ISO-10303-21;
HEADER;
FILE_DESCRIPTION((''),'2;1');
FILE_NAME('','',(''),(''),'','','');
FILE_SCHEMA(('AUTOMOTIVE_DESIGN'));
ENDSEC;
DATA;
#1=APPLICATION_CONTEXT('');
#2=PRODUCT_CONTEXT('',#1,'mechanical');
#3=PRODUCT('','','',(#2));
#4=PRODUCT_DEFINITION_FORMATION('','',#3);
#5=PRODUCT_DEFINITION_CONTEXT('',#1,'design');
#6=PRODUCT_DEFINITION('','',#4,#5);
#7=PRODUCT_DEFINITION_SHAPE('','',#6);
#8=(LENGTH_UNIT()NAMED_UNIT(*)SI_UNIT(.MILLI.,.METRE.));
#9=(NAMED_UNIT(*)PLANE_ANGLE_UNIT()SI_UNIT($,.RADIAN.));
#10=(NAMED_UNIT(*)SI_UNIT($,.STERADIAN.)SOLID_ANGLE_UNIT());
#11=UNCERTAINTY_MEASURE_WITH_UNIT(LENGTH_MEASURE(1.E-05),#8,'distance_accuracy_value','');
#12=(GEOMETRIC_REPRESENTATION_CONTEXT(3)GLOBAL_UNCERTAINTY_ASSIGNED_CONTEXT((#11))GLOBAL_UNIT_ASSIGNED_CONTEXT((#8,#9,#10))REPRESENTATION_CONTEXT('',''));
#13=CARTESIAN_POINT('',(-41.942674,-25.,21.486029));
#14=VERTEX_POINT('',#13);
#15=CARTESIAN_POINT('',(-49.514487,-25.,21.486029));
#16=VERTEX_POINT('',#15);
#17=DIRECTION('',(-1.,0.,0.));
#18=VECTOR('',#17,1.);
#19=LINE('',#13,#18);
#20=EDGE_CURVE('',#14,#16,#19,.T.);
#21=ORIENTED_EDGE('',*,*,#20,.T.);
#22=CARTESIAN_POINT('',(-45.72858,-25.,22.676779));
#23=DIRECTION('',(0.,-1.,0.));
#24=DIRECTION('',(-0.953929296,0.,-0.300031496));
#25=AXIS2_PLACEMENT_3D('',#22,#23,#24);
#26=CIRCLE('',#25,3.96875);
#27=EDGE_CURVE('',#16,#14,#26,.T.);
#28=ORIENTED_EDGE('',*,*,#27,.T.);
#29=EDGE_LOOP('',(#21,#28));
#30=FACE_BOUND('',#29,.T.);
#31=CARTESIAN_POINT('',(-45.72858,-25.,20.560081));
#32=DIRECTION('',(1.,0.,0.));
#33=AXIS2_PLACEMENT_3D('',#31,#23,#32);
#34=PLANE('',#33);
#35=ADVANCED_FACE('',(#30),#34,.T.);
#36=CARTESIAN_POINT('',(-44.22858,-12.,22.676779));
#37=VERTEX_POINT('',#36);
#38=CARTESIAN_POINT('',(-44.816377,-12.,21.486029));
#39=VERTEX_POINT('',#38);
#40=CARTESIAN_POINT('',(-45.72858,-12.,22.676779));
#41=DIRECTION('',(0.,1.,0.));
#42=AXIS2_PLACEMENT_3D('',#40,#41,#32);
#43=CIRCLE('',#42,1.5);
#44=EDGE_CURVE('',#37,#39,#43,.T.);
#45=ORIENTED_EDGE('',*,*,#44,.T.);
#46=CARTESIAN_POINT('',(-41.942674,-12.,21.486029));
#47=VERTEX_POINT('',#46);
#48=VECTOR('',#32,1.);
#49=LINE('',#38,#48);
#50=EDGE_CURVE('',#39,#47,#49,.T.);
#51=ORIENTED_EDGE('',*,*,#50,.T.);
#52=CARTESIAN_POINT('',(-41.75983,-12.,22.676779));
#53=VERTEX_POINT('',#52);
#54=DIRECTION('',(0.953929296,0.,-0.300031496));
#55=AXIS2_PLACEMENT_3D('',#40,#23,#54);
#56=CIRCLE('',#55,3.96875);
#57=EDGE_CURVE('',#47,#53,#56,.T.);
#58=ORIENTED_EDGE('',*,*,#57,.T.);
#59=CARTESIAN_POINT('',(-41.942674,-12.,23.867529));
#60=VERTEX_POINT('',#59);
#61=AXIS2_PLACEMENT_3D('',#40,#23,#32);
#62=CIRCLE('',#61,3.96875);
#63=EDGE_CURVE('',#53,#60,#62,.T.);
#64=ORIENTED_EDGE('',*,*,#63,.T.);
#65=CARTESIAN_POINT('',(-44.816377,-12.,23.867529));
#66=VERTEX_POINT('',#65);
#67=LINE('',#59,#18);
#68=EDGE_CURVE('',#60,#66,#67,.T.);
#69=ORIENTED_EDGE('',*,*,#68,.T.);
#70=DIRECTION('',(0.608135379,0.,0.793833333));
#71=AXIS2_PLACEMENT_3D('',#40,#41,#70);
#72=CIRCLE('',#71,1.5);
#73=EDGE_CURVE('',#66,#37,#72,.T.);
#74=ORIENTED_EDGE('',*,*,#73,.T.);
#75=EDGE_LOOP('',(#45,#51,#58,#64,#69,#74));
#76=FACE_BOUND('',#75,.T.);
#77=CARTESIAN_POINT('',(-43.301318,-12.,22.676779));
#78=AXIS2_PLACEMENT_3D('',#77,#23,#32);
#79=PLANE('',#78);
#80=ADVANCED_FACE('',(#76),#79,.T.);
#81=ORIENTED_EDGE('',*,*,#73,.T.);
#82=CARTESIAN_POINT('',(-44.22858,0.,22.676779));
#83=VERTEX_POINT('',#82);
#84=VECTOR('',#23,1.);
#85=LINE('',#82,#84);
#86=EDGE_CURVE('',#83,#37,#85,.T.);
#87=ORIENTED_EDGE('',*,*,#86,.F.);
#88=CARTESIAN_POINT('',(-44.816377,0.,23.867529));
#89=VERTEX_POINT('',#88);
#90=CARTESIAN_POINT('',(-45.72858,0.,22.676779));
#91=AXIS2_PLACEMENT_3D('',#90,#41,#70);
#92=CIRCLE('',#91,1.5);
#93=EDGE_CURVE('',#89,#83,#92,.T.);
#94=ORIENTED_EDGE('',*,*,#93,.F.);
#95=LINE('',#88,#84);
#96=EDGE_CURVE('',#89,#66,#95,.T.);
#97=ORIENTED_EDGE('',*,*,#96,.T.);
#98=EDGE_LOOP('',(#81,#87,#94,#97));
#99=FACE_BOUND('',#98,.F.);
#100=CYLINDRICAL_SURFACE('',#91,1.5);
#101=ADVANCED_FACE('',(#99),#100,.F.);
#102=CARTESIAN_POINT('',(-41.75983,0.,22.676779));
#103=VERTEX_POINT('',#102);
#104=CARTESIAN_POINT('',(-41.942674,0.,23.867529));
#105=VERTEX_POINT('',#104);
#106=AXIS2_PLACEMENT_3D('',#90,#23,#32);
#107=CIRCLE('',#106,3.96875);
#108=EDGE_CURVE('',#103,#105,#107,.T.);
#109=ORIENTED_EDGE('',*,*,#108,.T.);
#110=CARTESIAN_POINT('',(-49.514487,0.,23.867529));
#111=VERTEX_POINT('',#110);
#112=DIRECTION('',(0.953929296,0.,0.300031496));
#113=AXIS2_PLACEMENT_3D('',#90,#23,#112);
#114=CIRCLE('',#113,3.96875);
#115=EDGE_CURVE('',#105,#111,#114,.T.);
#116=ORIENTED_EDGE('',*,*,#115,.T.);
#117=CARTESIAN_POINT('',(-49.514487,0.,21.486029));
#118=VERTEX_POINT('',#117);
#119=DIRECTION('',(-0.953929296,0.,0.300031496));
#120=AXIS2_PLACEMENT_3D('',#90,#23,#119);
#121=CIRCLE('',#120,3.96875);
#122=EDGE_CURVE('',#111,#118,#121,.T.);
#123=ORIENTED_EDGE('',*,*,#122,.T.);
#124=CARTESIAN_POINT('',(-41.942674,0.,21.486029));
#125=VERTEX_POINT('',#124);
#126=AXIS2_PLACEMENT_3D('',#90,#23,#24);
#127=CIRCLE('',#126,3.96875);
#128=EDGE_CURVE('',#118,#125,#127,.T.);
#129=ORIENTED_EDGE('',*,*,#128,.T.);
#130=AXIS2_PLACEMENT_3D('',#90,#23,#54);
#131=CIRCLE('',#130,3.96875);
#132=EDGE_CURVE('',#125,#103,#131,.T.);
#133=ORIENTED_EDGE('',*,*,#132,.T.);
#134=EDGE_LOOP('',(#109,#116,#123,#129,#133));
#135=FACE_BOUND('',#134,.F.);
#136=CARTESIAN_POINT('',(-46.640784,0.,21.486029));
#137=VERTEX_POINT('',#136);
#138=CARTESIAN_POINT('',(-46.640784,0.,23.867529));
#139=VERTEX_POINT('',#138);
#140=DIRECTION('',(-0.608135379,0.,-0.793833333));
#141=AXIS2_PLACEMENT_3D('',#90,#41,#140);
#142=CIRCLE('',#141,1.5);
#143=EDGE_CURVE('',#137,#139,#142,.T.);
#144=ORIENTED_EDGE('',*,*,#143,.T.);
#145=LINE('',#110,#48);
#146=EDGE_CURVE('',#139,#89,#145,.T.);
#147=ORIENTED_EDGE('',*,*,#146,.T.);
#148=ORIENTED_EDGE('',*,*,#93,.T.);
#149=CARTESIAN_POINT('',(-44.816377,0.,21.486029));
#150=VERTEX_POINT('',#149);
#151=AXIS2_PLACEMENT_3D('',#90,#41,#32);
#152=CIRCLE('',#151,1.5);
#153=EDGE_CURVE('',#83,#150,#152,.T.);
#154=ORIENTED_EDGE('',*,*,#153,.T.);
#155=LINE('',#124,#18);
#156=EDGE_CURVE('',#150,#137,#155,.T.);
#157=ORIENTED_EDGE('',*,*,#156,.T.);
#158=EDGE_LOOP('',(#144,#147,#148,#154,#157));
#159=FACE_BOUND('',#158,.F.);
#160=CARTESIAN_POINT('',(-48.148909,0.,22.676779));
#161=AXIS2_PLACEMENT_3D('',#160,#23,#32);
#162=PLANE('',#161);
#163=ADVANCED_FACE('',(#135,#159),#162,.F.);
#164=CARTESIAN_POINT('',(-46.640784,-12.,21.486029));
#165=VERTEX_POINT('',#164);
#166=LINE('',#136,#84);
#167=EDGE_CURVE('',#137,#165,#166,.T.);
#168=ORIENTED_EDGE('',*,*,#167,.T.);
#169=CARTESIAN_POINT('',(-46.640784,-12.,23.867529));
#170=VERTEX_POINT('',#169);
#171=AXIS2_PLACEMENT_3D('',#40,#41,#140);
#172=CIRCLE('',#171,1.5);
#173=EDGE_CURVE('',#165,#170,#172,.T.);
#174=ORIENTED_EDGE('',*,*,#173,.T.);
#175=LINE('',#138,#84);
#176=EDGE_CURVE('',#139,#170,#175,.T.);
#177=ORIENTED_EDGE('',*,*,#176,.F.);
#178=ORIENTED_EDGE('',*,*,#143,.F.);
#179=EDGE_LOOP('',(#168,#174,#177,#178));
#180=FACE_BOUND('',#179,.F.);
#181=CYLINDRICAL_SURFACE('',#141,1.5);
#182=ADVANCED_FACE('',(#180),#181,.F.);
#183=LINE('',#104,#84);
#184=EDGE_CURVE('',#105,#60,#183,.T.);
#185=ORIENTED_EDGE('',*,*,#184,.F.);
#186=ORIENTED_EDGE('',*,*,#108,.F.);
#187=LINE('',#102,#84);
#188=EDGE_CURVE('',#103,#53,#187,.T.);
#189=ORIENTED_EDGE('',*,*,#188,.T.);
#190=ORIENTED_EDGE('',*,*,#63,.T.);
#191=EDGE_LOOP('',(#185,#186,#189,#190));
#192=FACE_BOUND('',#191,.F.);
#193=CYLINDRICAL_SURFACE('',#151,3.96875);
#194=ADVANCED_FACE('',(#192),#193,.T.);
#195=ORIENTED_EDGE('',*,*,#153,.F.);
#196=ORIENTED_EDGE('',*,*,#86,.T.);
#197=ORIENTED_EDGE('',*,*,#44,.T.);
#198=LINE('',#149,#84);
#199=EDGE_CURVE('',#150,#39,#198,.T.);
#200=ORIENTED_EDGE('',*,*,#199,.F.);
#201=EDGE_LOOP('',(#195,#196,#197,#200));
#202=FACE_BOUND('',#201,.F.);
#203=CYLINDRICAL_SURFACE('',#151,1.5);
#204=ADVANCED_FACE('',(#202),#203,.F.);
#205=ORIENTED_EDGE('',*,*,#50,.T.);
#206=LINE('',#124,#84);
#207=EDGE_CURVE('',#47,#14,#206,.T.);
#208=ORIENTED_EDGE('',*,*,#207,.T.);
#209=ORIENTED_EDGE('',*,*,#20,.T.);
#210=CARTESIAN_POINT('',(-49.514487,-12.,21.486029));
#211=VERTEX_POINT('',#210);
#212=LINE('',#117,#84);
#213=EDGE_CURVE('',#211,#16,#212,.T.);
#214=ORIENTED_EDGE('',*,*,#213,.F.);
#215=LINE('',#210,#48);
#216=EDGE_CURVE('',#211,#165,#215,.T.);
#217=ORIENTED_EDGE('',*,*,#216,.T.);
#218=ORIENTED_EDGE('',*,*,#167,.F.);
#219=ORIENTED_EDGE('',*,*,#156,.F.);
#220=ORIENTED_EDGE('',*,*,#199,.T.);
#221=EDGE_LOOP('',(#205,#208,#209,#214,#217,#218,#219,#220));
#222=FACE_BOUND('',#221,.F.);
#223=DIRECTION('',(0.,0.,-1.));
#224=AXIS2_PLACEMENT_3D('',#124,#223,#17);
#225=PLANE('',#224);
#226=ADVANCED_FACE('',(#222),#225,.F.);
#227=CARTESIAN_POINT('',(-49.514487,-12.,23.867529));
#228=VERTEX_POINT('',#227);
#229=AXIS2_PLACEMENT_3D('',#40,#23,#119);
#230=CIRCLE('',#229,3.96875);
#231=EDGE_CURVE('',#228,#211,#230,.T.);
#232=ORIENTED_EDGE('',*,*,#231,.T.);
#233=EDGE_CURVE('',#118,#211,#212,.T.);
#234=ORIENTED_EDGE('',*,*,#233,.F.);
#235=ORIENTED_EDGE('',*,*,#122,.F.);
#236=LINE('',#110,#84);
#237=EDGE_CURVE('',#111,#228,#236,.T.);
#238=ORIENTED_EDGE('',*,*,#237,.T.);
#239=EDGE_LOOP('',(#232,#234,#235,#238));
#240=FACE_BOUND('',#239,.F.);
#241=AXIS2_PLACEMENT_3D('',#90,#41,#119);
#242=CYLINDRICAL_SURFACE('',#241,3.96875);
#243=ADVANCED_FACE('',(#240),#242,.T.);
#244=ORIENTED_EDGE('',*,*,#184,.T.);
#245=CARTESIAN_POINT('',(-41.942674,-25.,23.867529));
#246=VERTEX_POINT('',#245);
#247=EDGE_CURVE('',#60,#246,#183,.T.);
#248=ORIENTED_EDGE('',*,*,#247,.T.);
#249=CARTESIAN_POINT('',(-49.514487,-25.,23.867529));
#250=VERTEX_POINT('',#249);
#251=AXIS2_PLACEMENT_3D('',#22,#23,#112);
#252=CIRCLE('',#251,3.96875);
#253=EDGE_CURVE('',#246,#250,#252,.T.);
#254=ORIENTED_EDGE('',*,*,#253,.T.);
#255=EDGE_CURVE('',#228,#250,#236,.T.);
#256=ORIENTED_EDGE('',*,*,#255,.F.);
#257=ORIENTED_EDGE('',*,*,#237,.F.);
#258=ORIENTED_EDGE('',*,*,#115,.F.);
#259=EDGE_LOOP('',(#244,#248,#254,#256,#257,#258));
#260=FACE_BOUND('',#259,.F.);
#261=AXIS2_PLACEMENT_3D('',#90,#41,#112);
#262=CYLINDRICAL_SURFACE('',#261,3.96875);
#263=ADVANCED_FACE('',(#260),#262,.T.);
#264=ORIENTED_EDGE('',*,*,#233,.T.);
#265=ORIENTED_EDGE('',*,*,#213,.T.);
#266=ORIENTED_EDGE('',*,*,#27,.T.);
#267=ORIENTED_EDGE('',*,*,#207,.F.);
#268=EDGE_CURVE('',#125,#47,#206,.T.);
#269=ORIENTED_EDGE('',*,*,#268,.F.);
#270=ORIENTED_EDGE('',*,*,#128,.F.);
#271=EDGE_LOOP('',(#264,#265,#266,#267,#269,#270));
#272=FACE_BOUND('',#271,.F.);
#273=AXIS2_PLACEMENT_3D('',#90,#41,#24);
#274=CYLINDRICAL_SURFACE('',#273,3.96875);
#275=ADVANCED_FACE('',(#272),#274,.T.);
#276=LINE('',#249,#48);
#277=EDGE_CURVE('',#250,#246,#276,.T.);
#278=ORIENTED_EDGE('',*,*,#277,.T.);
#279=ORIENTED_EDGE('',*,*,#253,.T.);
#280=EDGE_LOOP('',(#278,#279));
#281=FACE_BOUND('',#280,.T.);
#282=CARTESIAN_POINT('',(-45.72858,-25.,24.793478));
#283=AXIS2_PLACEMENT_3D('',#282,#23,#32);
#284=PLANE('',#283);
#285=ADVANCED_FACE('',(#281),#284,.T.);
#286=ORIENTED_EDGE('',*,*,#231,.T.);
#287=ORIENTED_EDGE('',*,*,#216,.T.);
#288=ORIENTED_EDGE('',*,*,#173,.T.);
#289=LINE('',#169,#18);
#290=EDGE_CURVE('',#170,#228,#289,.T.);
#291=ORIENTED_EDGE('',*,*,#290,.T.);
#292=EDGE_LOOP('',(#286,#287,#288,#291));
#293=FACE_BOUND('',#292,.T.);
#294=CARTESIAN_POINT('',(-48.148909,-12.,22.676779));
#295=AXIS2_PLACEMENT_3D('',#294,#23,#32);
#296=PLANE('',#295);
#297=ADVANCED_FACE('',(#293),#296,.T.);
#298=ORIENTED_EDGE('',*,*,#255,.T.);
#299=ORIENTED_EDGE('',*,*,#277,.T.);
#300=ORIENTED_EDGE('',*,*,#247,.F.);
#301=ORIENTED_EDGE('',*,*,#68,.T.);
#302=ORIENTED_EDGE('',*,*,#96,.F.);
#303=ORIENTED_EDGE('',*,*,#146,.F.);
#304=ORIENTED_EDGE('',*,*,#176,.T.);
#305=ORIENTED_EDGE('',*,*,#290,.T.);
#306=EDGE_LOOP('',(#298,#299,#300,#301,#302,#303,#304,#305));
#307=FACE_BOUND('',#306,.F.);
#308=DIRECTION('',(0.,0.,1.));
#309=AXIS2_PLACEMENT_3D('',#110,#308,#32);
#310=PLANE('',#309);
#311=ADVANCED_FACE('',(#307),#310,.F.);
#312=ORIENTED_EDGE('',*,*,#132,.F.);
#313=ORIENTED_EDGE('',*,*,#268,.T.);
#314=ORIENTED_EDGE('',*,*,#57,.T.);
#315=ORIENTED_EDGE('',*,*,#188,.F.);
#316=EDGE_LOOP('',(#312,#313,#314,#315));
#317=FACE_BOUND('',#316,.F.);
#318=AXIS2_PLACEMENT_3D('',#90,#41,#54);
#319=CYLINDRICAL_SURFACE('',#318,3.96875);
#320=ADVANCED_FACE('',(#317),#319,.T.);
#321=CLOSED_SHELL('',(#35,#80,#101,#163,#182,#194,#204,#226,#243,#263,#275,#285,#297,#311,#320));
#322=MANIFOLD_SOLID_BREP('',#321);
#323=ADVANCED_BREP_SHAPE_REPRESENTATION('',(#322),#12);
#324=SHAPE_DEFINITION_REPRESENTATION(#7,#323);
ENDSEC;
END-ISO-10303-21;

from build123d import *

# Parameters (mm, degrees)
F1_DEPTH = 25
F2_DEPTH = 12


# Not quite as in the source:
# - a feature names something its author has since deleted; it is built from what else it names


with BuildPart() as f1:
    # F0 (on Front) → F1 (new body)
    with BuildSketch(Plane.XZ):
        with BuildLine():
            Line((-44.8163774249, 23.8675290289), (-41.9426736004, 23.8675290289))
            ThreePointArc((-41.9426736004, 23.8675290289), (-45.7285804931, 26.6455290289), (-49.5144873857, 23.8675290289))
            Line((-49.5144873857, 23.8675290289), (-46.6407835612, 23.8675290289))
            ThreePointArc((-46.6407835612, 23.8675290289), (-45.7285804931, 24.1767790289), (-44.8163774249, 23.8675290289))
        make_face()
        with BuildLine():
            Line((-46.6407835612, 23.8675290289), (-44.8163774249, 23.8675290289))
            ThreePointArc((-44.8163774249, 23.8675290289), (-45.7285804931, 24.1767790289), (-46.6407835612, 23.8675290289))
        make_face()
    extrude(amount=F1_DEPTH)



with BuildPart() as f1b:
    # F0 (on Front) → F1, piece 2 (new body)
    with BuildSketch(Plane.XZ):
        with BuildLine():
            ThreePointArc((-49.5144873857, 21.4860290289), (-45.7285804931, 18.7080290289), (-41.9426736004, 21.4860290289))
            Line((-41.9426736004, 21.4860290289), (-44.8163774249, 21.4860290289))
            ThreePointArc((-44.8163774249, 21.4860290289), (-45.7285804931, 21.1767790289), (-46.6407835612, 21.4860290289))
            Line((-46.6407835612, 21.4860290289), (-49.5144873857, 21.4860290289))
        make_face()
        with BuildLine():
            ThreePointArc((-46.6407835612, 21.4860290289), (-45.7285804931, 21.1767790289), (-44.8163774249, 21.4860290289))
            Line((-44.8163774249, 21.4860290289), (-46.6407835612, 21.4860290289))
        make_face()
    extrude(amount=F1_DEPTH)


with BuildPart() as f1_1:
    add(f1.part)

    add(f1b.part)  # F2 merges F1b
    # F0 (on Front) → F2 (join)
    with BuildSketch(Plane.XZ):
        with BuildLine():
            Line((-46.6407835612, 23.8675290289), (-49.5144873857, 23.8675290289))
            ThreePointArc((-49.5144873857, 23.8675290289), (-49.6973304931, 22.6767790289), (-49.5144873857, 21.4860290289))
            Line((-49.5144873857, 21.4860290289), (-46.6407835612, 21.4860290289))
            ThreePointArc((-46.6407835612, 21.4860290289), (-47.2285804931, 22.6767790289), (-46.6407835612, 23.8675290289))
        make_face()
        with BuildLine():
            ThreePointArc((-41.9426736004, 21.4860290289), (-41.8058075872, 22.0744259007), (-41.7598304931, 22.6767790289))
            ThreePointArc((-41.7598304931, 22.6767790289), (-41.8058075872, 23.2791321571), (-41.9426736004, 23.8675290289))
            Line((-41.9426736004, 23.8675290289), (-44.8163774249, 23.8675290289))
            ThreePointArc((-44.8163774249, 23.8675290289), (-44.3835331701, 23.3407426566), (-44.2285804931, 22.6767790289))
            ThreePointArc((-44.2285804931, 22.6767790289), (-44.3835331701, 22.0128154012), (-44.8163774249, 21.4860290289))
            Line((-44.8163774249, 21.4860290289), (-41.9426736004, 21.4860290289))
        make_face()
    extrude(amount=F2_DEPTH)


solid = f1_1.part
